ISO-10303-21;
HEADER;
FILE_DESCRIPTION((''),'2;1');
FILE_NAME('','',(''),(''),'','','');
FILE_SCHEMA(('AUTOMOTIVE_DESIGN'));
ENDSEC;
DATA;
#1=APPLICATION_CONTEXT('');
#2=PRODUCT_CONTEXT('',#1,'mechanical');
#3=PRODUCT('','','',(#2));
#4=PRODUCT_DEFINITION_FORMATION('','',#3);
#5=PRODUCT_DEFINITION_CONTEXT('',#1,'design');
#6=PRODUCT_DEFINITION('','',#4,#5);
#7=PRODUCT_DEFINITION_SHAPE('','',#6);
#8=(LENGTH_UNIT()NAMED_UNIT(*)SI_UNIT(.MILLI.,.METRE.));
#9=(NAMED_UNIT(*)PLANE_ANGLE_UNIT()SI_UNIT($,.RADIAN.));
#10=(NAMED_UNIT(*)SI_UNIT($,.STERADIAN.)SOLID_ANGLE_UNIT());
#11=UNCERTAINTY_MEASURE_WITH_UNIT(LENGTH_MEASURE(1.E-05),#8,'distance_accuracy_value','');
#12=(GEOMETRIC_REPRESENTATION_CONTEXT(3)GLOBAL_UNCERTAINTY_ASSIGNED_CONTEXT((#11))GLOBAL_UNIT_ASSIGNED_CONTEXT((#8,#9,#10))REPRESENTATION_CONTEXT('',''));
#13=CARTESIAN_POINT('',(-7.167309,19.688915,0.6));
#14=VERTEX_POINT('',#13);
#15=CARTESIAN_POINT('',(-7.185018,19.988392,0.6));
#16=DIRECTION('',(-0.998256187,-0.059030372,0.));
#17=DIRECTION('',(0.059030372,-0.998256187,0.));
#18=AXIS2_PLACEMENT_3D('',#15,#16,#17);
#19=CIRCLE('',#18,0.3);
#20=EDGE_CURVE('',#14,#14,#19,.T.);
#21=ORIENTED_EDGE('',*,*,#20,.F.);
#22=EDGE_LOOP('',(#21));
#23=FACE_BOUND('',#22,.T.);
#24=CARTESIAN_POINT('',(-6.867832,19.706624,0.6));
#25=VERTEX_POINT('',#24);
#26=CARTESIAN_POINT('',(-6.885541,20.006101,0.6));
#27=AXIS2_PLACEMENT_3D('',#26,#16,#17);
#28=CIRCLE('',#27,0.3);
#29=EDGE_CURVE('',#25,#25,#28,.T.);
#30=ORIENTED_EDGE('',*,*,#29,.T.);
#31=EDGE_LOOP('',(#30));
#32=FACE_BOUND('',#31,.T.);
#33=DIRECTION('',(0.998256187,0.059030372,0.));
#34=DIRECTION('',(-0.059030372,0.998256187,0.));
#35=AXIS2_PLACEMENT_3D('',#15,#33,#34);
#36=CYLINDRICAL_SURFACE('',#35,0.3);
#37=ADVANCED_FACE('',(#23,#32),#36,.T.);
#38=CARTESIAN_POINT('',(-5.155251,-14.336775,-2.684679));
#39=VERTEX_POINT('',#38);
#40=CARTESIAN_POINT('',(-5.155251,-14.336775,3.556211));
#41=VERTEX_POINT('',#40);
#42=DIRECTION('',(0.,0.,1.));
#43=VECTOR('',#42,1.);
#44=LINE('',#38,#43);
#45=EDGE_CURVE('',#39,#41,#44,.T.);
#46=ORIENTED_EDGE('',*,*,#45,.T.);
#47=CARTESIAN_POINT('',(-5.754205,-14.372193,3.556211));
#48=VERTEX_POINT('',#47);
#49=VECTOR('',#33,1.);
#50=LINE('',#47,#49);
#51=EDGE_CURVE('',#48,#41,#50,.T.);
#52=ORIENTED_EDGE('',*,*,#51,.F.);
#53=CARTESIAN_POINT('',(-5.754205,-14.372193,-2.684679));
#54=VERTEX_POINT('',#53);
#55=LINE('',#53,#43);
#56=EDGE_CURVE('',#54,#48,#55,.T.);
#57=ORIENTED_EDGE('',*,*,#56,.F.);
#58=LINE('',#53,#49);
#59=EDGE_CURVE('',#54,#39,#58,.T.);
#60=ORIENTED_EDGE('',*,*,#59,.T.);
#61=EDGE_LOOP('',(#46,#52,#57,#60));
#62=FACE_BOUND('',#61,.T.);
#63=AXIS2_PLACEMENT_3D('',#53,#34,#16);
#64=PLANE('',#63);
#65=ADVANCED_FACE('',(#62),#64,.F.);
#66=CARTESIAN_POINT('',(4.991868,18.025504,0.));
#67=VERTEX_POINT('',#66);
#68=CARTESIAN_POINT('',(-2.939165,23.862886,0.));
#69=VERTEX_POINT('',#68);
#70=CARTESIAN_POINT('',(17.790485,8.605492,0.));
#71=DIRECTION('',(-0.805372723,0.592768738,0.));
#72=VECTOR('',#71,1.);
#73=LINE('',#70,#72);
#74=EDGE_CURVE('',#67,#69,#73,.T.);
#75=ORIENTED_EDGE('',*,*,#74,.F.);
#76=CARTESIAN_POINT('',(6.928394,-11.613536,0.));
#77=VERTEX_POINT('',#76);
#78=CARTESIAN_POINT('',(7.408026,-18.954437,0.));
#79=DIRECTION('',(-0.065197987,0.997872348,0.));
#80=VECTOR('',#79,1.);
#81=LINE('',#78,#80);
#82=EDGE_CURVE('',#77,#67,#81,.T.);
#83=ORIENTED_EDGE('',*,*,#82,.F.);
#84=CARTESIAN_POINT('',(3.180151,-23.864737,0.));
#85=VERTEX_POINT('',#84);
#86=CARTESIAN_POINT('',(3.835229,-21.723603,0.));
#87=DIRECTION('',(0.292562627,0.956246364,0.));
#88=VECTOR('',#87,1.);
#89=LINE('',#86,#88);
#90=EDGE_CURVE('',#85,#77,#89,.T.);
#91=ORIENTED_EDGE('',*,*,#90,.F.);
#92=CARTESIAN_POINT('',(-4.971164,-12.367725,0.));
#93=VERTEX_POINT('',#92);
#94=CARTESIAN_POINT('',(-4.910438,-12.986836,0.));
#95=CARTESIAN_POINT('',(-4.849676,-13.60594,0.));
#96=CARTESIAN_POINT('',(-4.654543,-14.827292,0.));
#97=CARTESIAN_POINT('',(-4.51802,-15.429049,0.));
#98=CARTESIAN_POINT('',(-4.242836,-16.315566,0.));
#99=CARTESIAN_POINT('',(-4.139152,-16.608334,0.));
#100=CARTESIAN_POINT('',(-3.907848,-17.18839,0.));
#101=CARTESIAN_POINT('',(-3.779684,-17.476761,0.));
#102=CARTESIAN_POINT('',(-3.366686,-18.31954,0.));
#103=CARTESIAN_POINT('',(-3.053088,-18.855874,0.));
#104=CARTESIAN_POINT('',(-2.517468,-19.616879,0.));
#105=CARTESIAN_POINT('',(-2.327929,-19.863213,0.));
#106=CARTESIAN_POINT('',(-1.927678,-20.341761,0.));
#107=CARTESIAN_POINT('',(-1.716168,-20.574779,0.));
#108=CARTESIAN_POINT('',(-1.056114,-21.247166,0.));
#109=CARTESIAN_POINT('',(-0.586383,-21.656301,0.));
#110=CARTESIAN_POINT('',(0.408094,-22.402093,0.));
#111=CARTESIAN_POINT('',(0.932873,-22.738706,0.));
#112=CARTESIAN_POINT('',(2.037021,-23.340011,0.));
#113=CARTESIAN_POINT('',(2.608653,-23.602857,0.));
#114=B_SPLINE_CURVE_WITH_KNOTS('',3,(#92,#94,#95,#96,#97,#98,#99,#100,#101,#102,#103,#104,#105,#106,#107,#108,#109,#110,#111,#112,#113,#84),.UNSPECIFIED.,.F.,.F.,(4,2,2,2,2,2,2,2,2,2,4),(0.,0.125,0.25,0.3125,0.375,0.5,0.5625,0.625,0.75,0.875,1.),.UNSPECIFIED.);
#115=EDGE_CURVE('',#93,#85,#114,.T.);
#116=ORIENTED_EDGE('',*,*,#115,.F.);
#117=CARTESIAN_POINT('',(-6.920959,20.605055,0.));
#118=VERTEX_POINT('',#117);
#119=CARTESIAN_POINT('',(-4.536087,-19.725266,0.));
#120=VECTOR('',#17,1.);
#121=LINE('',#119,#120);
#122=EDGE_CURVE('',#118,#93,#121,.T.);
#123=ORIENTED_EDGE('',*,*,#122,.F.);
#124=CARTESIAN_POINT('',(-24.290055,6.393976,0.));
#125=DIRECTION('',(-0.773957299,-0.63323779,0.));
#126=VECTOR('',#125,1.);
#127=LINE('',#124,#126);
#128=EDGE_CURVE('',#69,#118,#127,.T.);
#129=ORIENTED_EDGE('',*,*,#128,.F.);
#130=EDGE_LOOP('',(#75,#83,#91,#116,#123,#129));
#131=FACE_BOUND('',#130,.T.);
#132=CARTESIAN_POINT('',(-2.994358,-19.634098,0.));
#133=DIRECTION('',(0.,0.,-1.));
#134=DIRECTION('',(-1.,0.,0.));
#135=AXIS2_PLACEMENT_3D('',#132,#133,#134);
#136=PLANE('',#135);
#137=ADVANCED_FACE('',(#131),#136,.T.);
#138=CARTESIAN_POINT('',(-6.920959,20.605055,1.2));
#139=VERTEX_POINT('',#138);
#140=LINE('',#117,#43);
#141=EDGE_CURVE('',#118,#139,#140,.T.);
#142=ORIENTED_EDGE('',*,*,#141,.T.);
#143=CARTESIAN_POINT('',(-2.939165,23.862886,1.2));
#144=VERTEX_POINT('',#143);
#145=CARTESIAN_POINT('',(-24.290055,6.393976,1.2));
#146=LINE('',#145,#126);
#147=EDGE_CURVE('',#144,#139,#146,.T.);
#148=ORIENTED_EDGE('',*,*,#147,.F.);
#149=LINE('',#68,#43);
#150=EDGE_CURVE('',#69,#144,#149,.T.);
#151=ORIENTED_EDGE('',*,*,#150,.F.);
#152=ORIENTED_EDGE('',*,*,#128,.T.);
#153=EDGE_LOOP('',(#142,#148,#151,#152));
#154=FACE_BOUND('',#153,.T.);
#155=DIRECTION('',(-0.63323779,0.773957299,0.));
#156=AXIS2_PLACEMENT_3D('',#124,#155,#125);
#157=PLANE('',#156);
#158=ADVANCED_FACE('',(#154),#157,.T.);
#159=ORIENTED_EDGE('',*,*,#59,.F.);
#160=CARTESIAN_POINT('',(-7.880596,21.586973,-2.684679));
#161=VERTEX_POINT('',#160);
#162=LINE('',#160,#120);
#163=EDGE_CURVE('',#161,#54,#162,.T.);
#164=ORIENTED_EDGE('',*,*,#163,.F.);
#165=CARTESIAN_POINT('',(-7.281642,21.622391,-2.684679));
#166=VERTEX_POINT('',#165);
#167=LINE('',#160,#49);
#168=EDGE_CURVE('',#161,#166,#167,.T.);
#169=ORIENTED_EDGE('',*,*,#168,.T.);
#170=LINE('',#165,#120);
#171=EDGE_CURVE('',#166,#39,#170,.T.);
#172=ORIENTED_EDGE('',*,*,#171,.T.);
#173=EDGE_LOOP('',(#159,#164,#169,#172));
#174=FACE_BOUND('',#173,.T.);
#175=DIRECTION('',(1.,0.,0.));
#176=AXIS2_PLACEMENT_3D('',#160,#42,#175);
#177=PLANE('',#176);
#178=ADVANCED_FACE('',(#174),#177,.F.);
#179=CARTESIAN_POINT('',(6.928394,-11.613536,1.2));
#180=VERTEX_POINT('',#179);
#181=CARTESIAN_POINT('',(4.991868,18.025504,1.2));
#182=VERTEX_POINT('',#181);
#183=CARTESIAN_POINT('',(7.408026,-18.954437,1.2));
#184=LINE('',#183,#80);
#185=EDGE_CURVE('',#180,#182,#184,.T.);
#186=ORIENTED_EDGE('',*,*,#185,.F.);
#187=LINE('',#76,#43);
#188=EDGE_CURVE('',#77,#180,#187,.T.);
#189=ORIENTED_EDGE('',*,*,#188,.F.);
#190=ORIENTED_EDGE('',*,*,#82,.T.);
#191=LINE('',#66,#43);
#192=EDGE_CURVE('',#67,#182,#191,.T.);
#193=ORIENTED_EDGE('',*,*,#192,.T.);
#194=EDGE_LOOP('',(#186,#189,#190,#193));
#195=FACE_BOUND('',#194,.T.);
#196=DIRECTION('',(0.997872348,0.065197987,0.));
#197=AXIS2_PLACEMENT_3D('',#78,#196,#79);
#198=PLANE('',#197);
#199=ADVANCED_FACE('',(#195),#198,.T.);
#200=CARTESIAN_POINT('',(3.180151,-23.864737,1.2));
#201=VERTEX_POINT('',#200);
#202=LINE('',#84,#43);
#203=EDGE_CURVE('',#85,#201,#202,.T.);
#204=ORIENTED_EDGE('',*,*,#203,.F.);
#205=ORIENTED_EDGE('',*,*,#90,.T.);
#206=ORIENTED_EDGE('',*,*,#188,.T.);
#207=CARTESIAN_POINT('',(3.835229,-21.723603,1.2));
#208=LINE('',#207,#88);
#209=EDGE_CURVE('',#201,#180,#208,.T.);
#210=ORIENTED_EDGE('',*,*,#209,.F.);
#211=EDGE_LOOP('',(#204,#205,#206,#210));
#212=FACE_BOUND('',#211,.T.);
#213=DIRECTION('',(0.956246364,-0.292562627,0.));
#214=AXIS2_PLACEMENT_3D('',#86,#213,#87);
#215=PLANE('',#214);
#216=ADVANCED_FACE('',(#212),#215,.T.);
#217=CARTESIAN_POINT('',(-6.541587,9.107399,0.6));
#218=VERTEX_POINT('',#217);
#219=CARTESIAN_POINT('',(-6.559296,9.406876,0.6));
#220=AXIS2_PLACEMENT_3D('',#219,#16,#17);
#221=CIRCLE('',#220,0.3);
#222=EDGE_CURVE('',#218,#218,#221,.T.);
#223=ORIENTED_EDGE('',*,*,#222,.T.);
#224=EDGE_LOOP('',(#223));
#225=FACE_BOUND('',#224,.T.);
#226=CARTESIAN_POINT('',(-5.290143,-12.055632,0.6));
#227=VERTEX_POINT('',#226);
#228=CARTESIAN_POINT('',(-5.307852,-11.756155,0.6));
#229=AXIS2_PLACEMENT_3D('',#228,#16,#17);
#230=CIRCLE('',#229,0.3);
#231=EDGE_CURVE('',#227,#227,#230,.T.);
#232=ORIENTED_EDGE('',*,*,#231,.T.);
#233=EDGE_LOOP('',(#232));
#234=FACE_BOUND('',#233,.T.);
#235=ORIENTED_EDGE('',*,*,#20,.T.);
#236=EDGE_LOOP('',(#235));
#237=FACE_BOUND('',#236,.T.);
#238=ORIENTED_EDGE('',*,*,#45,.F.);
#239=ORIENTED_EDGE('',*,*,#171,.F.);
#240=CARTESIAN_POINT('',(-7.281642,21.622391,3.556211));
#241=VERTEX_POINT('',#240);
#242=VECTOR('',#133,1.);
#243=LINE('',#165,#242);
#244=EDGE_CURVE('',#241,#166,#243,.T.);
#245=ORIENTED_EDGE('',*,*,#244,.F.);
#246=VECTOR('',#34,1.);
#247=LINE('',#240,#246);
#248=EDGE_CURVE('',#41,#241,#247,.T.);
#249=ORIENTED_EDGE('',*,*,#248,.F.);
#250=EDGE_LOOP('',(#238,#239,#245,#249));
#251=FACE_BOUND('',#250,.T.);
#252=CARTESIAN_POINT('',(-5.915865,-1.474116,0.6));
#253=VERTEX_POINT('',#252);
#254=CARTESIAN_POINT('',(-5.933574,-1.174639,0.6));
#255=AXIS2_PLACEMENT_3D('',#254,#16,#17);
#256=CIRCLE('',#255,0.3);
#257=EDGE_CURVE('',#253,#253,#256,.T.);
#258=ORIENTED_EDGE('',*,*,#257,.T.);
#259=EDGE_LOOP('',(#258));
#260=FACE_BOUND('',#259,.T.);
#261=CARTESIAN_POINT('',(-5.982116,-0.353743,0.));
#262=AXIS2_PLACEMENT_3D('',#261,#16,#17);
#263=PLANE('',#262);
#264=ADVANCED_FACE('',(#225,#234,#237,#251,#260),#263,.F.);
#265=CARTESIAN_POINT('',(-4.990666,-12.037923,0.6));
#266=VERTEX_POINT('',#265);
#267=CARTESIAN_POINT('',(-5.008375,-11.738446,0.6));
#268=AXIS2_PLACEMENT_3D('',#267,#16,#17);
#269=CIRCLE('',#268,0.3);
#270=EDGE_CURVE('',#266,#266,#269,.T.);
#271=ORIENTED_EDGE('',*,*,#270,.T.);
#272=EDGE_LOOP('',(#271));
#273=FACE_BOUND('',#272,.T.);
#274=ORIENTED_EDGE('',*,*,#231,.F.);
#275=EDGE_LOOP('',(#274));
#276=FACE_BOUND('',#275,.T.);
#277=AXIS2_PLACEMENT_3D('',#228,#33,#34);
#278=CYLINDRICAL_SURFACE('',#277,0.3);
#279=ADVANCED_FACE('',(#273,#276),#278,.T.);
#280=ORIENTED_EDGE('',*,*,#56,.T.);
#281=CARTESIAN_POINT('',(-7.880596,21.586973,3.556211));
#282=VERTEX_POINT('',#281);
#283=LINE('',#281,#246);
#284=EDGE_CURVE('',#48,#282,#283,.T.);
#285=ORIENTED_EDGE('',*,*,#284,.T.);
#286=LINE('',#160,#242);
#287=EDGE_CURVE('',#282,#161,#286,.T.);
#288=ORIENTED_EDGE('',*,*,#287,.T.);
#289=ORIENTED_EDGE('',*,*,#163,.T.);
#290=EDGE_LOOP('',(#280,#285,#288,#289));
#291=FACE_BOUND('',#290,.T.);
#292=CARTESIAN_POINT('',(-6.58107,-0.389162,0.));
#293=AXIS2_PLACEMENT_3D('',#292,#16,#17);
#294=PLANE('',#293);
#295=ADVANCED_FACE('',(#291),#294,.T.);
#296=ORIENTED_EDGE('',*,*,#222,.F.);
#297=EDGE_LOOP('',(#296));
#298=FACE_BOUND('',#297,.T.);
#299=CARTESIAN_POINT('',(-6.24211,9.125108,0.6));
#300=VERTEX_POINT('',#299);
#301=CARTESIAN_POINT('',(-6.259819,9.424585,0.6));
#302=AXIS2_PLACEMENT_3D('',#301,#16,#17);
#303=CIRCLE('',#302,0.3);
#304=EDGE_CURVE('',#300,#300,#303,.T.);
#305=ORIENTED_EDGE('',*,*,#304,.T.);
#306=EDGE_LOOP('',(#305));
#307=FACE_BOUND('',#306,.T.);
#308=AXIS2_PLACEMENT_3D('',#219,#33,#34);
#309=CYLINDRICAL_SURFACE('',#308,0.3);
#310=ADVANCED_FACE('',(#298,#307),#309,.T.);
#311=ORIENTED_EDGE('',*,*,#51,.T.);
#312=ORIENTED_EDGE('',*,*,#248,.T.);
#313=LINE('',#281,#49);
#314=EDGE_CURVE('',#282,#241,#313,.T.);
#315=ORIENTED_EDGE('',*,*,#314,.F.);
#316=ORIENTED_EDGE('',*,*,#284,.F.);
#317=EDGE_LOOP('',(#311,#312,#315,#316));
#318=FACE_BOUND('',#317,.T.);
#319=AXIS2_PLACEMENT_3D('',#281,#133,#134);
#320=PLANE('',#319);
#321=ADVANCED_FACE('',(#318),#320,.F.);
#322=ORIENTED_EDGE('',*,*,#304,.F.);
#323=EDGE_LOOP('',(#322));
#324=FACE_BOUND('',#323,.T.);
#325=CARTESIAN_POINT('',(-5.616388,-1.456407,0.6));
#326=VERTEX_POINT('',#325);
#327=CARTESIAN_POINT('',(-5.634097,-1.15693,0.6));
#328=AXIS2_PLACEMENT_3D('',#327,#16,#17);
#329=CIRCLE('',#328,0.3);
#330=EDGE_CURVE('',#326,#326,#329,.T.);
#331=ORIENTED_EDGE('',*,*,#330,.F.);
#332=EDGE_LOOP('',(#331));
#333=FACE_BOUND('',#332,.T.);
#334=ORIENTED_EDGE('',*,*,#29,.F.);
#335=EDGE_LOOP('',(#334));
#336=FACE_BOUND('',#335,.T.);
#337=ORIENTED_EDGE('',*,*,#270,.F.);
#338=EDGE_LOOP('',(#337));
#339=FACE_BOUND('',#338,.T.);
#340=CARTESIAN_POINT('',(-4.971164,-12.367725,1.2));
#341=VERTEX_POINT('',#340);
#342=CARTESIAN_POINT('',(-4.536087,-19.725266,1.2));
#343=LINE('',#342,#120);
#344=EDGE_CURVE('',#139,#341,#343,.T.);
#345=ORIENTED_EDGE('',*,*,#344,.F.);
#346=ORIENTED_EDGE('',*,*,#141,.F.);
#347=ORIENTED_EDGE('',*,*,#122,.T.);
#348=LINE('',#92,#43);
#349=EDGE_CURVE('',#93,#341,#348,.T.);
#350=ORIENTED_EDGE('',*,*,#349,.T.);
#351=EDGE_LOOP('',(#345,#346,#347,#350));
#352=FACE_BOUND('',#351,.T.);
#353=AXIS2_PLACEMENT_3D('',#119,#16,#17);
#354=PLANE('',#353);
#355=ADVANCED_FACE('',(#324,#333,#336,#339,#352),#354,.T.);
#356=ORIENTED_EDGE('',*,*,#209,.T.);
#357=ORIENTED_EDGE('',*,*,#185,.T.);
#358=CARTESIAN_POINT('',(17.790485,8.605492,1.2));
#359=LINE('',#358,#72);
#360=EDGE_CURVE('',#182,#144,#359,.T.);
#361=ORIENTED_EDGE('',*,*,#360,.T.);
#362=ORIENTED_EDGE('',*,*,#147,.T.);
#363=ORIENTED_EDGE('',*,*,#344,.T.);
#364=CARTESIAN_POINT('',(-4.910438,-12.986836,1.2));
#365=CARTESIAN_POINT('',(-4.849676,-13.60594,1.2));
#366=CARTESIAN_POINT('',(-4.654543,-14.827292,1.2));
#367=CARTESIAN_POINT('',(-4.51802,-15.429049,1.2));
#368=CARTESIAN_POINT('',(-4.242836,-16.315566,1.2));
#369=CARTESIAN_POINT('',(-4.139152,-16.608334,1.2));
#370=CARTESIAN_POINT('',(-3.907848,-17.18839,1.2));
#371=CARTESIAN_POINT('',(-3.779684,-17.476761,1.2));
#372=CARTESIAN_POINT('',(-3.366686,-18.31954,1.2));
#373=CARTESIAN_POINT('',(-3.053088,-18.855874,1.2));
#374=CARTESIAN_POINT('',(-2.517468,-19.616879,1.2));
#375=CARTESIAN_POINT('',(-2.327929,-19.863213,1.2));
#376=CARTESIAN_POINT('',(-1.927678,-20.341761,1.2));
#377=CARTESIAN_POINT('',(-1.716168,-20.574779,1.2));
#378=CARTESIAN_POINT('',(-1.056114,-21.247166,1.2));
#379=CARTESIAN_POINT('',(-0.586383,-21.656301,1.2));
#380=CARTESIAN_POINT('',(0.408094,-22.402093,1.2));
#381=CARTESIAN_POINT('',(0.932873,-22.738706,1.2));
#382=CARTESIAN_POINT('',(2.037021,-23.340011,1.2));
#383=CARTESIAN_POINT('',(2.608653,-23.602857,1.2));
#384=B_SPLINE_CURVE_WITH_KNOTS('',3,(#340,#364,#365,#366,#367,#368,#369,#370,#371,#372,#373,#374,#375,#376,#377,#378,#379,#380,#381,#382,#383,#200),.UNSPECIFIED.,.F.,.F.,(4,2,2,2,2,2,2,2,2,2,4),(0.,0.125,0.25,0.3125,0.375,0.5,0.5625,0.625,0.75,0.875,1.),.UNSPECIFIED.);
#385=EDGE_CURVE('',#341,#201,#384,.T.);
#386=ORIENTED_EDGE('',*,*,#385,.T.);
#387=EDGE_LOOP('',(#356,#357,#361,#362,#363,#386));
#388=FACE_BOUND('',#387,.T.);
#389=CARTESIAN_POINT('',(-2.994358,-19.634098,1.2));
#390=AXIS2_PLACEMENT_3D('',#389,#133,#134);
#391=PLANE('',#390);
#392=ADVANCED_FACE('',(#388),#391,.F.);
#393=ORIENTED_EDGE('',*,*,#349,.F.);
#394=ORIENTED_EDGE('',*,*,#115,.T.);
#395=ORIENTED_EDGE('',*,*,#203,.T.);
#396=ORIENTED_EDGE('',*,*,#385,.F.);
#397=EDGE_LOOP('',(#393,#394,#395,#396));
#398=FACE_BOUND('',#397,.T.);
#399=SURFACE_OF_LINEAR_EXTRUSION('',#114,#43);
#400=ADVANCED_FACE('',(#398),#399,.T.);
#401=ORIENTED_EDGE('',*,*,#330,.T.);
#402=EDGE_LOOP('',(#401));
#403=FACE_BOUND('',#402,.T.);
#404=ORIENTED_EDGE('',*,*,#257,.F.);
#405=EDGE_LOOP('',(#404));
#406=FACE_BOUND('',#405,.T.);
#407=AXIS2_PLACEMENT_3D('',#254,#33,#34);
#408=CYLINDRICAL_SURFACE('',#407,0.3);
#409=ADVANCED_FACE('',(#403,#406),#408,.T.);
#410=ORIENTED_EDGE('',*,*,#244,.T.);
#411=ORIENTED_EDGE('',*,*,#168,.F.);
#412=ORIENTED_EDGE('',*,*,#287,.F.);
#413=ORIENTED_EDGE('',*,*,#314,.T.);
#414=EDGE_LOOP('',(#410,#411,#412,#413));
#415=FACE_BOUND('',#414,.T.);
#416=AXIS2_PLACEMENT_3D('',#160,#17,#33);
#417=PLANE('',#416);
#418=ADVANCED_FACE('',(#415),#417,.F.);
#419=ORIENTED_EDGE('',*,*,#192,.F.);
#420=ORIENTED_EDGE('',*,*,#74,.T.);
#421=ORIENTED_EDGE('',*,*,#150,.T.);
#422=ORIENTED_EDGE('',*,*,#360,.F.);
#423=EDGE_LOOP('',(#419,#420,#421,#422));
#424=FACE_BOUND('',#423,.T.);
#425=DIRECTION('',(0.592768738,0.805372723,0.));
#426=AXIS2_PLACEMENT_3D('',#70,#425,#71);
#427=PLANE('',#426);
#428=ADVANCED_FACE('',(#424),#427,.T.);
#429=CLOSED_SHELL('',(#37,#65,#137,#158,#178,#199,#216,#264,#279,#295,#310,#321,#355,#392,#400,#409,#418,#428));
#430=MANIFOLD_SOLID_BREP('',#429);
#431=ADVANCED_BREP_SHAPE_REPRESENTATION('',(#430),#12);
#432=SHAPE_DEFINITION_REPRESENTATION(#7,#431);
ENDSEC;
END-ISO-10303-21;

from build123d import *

# Parameters (mm, degrees)
EXTRUDE_1_DEPTH     = 1.2
CUT_EXTRUDE_START   = -1.2
CUT_EXTRUDE_1_DEPTH = 1.2
SKETCH_3_R          = 0.3
EXTRUDE_2_DEPTH     = 0.3
SKETCH_4_W          = 6.240890377
SKETCH_4_H          = 36.021981299
EXTRUDE_3_DEPTH     = 0.6


# Read off the part's stored shape, not the designer's step: Вырез-Вытянуть-Тонкостенный1
with BuildPart() as part:
    # Эскиз1 → Бобышка-Вытянуть1 (new body)
    with BuildSketch(Plane.XY):
        with BuildLine():
            Line((5.378881308, 18.237319105), (-2.952136628, 24.369097407))
            Line((-2.952136628, 24.369097407), (-7.332317287, 20.785313231))
            Line((-7.332317287, 20.785313231), (-5.370009146, -12.399066019))
            add(Edge.make_bspline(
                [(-5.370009146, -12.399066019), (-5.302441643, -13.087933403), (-5.171652717, -14.4213588), (-4.705894041, -16.337224351), (-3.980118415, -18.073869331), (-3.037863831, -19.656891462), (-1.854751161, -21.069611208), (-0.442865037, -22.322015124), (1.210414163, -23.402243504), (2.432125444, -23.961998582), (3.062087221, -24.250630037)],
                knots=[0, 0, 0, 0, 0.134544415, 0.260434655, 0.381864625, 0.499402401, 0.617479097, 0.738843694, 0.865337667, 1, 1, 1, 1], degree=3))
            Line((3.062087221, -24.250630037), (3.44414449, -24.369097407))
            Line((3.44414449, -24.369097407), (7.332317287, -11.660532618))
            Line((7.332317287, -11.660532618), (5.378881308, 18.237319105))
        make_face()
    extrude(amount=EXTRUDE_1_DEPTH)

    # Вырез-Вытянуть-Тонкостенный1 outline → Вырез-Вытянуть-Тонкостенный1 (cut)
    with BuildSketch(Plane.XY.offset(1.2).offset(CUT_EXTRUDE_START)):
        with BuildLine():
            Line((-7.332317287, 20.785313231), (-5.370009146, -12.399066019))
            add(Edge.make_bspline(
                [(-5.370009146, -12.399066019), (-5.302441643, -13.087933403), (-5.171652717, -14.4213588), (-4.705894041, -16.337224351), (-3.980118415, -18.073869331), (-3.037863831, -19.656891462), (-1.854751161, -21.069611208), (-0.442865037, -22.322015124), (1.210414163, -23.402243504), (2.432125444, -23.961998582), (3.062087221, -24.250630037)],
                knots=[0, 0, 0, 0, 0.134544415, 0.260434655, 0.381864625, 0.499402401, 0.617479097, 0.738843694, 0.865337667, 1, 1, 1, 1], degree=3))
            Line((3.062087221, -24.250630037), (3.44414449, -24.369097407))
            Line((3.44414449, -24.369097407), (7.332317287, -11.660532618))
            Line((7.332317287, -11.660532618), (5.378881308, 18.237319105))
            Line((5.378881308, 18.237319105), (-2.952136628, 24.369097407))
            Line((-2.952136628, 24.369097407), (-7.332317287, 20.785313231))
        make_face()
        with BuildLine():
            add(Edge.make_bspline(
                [(-4.971163716, -12.367724843), (-4.910437592, -12.986836229), (-4.849676357, -13.605939574), (-4.654543085, -14.827292297), (-4.518019632, -15.429049084), (-4.24283568, -16.315565722), (-4.139152476, -16.608333995), (-3.907848144, -17.188389699), (-3.77968372, -17.476760574), (-3.366686296, -18.319539943), (-3.053087929, -18.855873767), (-2.517467922, -19.616879364), (-2.327928668, -19.863212785), (-1.927678486, -20.341760794), (-1.716167659, -20.574779068), (-1.056114397, -21.24716639), (-0.586382585, -21.656301106), (0.408094083, -22.402093404), (0.932873325, -22.738705687), (2.037021143, -23.34001134), (2.608653164, -23.602856812), (3.180150897, -23.864736725)],
                knots=[0, 0, 0, 0, 0.125, 0.125, 0.25, 0.25, 0.3125, 0.3125, 0.375, 0.375, 0.5, 0.5, 0.5625, 0.5625, 0.625, 0.625, 0.75, 0.75, 0.875, 0.875, 1, 1, 1, 1], degree=3))
            Line((-4.971163716, -12.367724843), (-6.920959218, 20.605054546))
            Line((-6.920959218, 20.605054546), (-2.939165367, 23.862885878))
            Line((-2.939165367, 23.862885878), (4.991867828, 18.025503503))
            Line((4.991867828, 18.025503503), (6.928393761, -11.61353551))
            Line((6.928393761, -11.61353551), (3.180150897, -23.864736725))
        make_face(mode=Mode.SUBTRACT)
    extrude(amount=CUT_EXTRUDE_1_DEPTH, mode=Mode.SUBTRACT)

    # Эскиз3 → Бобышка-Вытянуть2 (add)
    with BuildSketch(Plane(origin=(-5.682639561, -0.336034307, 0), x_dir=(0, 0, 1), z_dir=(-0.9982561871654927, -0.059030371723486505, 0))):
        with Locations(Location((0.6, 20.377669982, 0), (0, 0, 270))):
            Circle(SKETCH_3_R)
        with Locations(Location((0.6, 9.777669982, 0), (0, 0, 270))):
            Circle(SKETCH_3_R)
        with Locations(Location((0.6, -0.822330018, 0), (0, 0, 270))):
            Circle(SKETCH_3_R)
        with Locations(Location((0.6, -11.422330018, 0), (0, 0, 270))):
            Circle(SKETCH_3_R)
    extrude(amount=EXTRUDE_2_DEPTH)

    # Эскиз4 → Бобышка-Вытянуть3 (add)
    with BuildSketch(Plane(origin=(-5.982116417, -0.353743418, 0), x_dir=(0, 0, 1), z_dir=(-0.9982561871654927, -0.05903037172348652, 0))):
        with Locations((0.435766043, 4.003532813)):
            Rectangle(SKETCH_4_W, SKETCH_4_H)
    extrude(amount=EXTRUDE_3_DEPTH)


solid = part.part
